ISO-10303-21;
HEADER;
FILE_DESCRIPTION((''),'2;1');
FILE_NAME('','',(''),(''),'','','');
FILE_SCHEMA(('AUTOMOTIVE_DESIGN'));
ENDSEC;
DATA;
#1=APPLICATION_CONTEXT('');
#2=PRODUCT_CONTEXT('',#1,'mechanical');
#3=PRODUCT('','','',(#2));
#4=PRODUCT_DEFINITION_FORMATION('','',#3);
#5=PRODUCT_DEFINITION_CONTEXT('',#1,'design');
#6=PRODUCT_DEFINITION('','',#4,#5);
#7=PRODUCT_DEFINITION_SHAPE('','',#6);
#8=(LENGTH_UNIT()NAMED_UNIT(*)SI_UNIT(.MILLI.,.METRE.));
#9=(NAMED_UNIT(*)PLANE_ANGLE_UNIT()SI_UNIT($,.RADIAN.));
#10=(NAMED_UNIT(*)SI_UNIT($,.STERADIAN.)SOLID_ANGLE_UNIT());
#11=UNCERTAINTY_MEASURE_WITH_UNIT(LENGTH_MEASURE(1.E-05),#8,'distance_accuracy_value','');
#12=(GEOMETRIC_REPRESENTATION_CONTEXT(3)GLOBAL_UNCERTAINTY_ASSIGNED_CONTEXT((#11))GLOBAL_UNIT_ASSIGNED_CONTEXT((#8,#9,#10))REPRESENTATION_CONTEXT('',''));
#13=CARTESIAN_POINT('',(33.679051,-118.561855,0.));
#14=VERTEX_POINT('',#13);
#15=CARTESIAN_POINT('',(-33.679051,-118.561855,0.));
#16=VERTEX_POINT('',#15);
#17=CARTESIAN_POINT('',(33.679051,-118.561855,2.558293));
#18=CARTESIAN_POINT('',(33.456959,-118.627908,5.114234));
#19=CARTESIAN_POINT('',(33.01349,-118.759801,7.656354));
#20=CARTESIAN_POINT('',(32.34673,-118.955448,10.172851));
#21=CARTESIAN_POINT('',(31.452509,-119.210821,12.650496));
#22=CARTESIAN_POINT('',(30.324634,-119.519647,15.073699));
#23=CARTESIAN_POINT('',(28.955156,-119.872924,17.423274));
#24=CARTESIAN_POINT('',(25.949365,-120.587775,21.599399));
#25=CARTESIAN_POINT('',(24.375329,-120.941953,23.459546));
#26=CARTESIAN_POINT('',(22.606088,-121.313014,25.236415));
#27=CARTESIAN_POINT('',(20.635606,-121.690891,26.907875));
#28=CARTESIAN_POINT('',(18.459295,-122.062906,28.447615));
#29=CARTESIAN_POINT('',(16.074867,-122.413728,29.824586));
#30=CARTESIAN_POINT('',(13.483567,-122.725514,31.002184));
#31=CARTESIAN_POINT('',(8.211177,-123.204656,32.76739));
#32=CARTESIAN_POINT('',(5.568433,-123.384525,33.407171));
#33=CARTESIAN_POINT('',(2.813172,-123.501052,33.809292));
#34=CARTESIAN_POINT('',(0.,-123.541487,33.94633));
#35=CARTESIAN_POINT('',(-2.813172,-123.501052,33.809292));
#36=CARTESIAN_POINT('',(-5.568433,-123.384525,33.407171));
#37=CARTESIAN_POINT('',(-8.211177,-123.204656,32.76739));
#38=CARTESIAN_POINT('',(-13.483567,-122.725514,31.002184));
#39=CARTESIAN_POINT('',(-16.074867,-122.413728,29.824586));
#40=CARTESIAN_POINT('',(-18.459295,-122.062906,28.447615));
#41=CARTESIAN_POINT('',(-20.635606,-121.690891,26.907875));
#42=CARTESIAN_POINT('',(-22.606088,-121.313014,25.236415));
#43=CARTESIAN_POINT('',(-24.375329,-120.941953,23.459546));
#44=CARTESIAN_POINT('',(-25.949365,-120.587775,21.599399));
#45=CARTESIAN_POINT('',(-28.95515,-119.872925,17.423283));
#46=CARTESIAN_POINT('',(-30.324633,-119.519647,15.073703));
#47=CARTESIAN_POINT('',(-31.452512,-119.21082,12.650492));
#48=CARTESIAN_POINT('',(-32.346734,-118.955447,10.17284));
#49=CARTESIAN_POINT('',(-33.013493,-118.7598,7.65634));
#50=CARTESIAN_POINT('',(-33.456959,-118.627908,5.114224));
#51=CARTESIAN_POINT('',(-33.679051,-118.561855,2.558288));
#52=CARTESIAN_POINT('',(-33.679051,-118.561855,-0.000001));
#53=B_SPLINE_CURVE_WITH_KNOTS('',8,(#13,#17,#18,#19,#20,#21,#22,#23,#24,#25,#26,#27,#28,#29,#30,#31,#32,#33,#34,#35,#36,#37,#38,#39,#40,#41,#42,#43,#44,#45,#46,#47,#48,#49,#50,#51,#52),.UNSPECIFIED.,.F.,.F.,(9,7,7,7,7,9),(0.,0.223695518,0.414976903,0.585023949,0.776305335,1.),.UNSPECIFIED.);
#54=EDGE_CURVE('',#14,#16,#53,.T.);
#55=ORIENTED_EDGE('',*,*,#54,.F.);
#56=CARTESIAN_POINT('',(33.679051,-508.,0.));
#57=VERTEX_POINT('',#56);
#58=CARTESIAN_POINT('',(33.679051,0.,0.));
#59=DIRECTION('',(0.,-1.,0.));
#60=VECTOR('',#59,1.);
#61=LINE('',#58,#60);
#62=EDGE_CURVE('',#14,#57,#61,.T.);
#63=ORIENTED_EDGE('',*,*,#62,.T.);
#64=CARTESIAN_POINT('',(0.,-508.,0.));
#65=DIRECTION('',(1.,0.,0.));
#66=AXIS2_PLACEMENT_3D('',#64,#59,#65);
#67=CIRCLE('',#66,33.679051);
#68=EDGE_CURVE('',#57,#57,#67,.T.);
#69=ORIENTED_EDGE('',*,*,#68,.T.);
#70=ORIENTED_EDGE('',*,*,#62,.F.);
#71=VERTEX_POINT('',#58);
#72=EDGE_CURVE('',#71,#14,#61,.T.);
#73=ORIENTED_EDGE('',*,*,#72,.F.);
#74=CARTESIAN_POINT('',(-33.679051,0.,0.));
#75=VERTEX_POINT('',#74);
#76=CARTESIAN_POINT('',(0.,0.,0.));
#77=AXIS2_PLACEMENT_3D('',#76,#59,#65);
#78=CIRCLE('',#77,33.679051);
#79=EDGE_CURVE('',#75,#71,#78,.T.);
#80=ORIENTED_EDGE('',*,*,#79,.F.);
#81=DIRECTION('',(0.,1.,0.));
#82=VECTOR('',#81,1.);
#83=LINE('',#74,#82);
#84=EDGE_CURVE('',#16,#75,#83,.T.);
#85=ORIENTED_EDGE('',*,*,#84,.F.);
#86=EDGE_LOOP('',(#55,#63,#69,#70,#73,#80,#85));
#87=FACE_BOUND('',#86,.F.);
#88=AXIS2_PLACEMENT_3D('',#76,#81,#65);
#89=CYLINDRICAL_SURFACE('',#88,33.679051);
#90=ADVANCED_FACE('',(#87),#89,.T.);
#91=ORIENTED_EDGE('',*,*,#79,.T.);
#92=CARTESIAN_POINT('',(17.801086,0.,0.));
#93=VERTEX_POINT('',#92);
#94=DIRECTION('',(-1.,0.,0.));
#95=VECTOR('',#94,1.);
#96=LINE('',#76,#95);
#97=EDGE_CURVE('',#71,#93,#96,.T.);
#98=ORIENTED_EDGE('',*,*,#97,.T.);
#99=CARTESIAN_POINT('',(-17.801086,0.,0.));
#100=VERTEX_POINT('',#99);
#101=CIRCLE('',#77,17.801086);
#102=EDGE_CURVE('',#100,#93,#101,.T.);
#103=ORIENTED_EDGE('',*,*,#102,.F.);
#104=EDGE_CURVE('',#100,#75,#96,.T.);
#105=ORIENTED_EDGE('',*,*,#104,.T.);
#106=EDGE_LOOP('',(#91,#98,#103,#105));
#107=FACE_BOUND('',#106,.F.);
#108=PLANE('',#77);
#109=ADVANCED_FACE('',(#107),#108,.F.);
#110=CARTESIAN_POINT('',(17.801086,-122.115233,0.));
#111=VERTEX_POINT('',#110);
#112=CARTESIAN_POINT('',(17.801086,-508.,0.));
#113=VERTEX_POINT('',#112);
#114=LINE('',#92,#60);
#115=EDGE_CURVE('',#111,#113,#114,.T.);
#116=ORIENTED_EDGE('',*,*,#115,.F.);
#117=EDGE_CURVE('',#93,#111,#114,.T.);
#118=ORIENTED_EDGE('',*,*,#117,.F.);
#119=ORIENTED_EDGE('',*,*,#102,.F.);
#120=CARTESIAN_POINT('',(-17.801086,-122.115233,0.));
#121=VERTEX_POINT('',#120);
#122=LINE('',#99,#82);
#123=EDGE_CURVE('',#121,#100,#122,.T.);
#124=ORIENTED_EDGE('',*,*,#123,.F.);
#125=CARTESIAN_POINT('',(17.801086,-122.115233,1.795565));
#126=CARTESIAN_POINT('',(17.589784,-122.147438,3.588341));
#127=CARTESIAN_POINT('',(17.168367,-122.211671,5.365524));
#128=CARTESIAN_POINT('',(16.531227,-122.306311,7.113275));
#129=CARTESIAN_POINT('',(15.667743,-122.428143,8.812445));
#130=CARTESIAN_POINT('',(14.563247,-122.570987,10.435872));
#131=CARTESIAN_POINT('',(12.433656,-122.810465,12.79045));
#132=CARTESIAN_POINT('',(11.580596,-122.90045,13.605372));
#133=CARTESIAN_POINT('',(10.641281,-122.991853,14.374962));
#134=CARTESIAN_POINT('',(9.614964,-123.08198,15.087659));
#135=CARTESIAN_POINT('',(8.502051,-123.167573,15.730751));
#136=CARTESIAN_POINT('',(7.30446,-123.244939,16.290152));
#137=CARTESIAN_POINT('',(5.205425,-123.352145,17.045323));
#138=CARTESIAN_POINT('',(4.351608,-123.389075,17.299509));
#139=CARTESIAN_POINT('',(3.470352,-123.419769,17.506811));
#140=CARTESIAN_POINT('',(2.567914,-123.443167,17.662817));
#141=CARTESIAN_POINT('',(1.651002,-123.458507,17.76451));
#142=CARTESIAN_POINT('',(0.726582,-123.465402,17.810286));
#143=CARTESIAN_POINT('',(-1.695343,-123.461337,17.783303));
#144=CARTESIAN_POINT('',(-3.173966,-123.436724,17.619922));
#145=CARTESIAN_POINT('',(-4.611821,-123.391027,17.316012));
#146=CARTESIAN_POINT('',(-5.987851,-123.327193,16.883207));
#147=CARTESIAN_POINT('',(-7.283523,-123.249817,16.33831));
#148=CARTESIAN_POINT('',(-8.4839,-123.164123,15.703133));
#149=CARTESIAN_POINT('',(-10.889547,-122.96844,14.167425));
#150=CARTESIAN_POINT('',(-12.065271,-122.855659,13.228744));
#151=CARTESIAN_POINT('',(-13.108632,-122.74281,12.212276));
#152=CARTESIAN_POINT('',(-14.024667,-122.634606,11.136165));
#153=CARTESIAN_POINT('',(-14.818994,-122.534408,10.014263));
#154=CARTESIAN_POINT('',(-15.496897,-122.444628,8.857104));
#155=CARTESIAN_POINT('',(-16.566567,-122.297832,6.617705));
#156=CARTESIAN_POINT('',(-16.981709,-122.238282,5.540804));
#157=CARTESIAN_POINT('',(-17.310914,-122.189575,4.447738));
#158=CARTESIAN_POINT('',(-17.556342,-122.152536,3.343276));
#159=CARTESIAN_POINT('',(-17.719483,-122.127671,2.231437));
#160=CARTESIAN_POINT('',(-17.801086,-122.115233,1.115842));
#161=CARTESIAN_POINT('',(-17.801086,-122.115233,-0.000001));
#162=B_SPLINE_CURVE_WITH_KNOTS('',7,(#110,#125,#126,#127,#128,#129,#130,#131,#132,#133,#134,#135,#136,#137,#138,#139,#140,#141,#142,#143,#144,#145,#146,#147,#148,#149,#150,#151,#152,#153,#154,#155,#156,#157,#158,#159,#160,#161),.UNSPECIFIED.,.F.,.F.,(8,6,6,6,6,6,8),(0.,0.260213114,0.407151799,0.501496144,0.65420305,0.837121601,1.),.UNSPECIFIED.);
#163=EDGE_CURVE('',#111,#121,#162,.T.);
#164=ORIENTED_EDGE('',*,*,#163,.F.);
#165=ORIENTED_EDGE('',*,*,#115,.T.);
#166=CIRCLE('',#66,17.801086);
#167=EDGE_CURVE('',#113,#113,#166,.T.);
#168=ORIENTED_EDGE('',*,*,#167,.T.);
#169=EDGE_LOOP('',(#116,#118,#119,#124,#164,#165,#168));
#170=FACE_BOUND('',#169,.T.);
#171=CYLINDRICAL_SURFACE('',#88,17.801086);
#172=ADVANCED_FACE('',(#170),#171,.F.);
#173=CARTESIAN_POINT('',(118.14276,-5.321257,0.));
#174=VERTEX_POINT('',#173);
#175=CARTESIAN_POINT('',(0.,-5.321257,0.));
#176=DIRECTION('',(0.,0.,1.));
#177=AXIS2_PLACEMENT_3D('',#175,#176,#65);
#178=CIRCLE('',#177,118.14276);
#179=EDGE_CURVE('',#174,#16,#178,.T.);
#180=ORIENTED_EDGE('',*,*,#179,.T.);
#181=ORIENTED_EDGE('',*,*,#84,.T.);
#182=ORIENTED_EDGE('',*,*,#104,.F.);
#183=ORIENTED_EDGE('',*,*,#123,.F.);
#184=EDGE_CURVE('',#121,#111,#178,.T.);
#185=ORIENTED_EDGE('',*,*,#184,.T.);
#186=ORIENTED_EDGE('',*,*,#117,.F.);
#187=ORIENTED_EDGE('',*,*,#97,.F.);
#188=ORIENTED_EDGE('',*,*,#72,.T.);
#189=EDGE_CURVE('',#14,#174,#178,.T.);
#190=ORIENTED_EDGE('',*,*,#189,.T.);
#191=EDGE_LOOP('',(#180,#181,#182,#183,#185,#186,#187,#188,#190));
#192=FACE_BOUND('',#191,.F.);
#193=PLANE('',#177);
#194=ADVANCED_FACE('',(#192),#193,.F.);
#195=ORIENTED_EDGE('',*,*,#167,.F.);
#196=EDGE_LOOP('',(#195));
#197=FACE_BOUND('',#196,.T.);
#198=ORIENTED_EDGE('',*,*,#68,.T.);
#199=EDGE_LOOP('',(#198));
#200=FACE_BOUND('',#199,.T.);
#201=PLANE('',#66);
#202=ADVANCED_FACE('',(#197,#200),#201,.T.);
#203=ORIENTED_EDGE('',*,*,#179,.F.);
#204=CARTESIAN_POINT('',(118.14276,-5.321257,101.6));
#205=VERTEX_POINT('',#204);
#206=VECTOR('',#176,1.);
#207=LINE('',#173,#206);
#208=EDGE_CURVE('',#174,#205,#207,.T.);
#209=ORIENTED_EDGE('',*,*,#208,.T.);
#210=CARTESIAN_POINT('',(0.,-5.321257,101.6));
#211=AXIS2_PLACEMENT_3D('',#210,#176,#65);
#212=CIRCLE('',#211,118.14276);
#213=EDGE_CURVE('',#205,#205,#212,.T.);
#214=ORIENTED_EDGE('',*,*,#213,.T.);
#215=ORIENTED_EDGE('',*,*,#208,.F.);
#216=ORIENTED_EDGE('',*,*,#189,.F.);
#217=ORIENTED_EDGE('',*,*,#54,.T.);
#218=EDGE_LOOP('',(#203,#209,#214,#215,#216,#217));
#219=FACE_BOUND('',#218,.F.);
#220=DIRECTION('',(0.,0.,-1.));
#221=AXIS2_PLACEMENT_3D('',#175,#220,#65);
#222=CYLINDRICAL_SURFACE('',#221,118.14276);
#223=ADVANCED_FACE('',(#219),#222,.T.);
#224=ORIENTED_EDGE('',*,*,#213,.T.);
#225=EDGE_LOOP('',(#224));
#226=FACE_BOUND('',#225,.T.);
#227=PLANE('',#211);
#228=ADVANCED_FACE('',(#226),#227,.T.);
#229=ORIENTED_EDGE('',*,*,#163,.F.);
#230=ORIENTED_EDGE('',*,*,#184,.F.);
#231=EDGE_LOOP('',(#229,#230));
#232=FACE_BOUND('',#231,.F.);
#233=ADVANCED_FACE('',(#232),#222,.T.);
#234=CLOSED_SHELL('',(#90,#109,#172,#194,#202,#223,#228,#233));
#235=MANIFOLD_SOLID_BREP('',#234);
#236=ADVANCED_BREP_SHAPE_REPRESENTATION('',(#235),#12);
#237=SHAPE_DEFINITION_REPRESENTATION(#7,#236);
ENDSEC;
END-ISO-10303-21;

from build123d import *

# Parameters (mm, degrees)
F0_R     = 33.6790507012
F0_R_2   = 17.8010861737
F1_DEPTH = 508
F2_R     = 118.1427595492
F3_DEPTH = 101.6


# Not quite as in the source:
# - the program builds the solid bodies; features that only make, move or delete a surface that nothing else refers to are left out


with BuildPart() as f1:
    # F0 (on Front) → F1 (new body)
    with BuildSketch(Plane.XZ):
        Circle(F0_R)
        Circle(F0_R_2, mode=Mode.SUBTRACT)
    extrude(amount=F1_DEPTH)

    # F2 (on Top) → F3 (join)
    with BuildSketch(Plane.XY):
        with Locations((0, -5.3212568164)):
            Circle(F2_R)
    extrude(amount=F3_DEPTH)


solid = f1.part
